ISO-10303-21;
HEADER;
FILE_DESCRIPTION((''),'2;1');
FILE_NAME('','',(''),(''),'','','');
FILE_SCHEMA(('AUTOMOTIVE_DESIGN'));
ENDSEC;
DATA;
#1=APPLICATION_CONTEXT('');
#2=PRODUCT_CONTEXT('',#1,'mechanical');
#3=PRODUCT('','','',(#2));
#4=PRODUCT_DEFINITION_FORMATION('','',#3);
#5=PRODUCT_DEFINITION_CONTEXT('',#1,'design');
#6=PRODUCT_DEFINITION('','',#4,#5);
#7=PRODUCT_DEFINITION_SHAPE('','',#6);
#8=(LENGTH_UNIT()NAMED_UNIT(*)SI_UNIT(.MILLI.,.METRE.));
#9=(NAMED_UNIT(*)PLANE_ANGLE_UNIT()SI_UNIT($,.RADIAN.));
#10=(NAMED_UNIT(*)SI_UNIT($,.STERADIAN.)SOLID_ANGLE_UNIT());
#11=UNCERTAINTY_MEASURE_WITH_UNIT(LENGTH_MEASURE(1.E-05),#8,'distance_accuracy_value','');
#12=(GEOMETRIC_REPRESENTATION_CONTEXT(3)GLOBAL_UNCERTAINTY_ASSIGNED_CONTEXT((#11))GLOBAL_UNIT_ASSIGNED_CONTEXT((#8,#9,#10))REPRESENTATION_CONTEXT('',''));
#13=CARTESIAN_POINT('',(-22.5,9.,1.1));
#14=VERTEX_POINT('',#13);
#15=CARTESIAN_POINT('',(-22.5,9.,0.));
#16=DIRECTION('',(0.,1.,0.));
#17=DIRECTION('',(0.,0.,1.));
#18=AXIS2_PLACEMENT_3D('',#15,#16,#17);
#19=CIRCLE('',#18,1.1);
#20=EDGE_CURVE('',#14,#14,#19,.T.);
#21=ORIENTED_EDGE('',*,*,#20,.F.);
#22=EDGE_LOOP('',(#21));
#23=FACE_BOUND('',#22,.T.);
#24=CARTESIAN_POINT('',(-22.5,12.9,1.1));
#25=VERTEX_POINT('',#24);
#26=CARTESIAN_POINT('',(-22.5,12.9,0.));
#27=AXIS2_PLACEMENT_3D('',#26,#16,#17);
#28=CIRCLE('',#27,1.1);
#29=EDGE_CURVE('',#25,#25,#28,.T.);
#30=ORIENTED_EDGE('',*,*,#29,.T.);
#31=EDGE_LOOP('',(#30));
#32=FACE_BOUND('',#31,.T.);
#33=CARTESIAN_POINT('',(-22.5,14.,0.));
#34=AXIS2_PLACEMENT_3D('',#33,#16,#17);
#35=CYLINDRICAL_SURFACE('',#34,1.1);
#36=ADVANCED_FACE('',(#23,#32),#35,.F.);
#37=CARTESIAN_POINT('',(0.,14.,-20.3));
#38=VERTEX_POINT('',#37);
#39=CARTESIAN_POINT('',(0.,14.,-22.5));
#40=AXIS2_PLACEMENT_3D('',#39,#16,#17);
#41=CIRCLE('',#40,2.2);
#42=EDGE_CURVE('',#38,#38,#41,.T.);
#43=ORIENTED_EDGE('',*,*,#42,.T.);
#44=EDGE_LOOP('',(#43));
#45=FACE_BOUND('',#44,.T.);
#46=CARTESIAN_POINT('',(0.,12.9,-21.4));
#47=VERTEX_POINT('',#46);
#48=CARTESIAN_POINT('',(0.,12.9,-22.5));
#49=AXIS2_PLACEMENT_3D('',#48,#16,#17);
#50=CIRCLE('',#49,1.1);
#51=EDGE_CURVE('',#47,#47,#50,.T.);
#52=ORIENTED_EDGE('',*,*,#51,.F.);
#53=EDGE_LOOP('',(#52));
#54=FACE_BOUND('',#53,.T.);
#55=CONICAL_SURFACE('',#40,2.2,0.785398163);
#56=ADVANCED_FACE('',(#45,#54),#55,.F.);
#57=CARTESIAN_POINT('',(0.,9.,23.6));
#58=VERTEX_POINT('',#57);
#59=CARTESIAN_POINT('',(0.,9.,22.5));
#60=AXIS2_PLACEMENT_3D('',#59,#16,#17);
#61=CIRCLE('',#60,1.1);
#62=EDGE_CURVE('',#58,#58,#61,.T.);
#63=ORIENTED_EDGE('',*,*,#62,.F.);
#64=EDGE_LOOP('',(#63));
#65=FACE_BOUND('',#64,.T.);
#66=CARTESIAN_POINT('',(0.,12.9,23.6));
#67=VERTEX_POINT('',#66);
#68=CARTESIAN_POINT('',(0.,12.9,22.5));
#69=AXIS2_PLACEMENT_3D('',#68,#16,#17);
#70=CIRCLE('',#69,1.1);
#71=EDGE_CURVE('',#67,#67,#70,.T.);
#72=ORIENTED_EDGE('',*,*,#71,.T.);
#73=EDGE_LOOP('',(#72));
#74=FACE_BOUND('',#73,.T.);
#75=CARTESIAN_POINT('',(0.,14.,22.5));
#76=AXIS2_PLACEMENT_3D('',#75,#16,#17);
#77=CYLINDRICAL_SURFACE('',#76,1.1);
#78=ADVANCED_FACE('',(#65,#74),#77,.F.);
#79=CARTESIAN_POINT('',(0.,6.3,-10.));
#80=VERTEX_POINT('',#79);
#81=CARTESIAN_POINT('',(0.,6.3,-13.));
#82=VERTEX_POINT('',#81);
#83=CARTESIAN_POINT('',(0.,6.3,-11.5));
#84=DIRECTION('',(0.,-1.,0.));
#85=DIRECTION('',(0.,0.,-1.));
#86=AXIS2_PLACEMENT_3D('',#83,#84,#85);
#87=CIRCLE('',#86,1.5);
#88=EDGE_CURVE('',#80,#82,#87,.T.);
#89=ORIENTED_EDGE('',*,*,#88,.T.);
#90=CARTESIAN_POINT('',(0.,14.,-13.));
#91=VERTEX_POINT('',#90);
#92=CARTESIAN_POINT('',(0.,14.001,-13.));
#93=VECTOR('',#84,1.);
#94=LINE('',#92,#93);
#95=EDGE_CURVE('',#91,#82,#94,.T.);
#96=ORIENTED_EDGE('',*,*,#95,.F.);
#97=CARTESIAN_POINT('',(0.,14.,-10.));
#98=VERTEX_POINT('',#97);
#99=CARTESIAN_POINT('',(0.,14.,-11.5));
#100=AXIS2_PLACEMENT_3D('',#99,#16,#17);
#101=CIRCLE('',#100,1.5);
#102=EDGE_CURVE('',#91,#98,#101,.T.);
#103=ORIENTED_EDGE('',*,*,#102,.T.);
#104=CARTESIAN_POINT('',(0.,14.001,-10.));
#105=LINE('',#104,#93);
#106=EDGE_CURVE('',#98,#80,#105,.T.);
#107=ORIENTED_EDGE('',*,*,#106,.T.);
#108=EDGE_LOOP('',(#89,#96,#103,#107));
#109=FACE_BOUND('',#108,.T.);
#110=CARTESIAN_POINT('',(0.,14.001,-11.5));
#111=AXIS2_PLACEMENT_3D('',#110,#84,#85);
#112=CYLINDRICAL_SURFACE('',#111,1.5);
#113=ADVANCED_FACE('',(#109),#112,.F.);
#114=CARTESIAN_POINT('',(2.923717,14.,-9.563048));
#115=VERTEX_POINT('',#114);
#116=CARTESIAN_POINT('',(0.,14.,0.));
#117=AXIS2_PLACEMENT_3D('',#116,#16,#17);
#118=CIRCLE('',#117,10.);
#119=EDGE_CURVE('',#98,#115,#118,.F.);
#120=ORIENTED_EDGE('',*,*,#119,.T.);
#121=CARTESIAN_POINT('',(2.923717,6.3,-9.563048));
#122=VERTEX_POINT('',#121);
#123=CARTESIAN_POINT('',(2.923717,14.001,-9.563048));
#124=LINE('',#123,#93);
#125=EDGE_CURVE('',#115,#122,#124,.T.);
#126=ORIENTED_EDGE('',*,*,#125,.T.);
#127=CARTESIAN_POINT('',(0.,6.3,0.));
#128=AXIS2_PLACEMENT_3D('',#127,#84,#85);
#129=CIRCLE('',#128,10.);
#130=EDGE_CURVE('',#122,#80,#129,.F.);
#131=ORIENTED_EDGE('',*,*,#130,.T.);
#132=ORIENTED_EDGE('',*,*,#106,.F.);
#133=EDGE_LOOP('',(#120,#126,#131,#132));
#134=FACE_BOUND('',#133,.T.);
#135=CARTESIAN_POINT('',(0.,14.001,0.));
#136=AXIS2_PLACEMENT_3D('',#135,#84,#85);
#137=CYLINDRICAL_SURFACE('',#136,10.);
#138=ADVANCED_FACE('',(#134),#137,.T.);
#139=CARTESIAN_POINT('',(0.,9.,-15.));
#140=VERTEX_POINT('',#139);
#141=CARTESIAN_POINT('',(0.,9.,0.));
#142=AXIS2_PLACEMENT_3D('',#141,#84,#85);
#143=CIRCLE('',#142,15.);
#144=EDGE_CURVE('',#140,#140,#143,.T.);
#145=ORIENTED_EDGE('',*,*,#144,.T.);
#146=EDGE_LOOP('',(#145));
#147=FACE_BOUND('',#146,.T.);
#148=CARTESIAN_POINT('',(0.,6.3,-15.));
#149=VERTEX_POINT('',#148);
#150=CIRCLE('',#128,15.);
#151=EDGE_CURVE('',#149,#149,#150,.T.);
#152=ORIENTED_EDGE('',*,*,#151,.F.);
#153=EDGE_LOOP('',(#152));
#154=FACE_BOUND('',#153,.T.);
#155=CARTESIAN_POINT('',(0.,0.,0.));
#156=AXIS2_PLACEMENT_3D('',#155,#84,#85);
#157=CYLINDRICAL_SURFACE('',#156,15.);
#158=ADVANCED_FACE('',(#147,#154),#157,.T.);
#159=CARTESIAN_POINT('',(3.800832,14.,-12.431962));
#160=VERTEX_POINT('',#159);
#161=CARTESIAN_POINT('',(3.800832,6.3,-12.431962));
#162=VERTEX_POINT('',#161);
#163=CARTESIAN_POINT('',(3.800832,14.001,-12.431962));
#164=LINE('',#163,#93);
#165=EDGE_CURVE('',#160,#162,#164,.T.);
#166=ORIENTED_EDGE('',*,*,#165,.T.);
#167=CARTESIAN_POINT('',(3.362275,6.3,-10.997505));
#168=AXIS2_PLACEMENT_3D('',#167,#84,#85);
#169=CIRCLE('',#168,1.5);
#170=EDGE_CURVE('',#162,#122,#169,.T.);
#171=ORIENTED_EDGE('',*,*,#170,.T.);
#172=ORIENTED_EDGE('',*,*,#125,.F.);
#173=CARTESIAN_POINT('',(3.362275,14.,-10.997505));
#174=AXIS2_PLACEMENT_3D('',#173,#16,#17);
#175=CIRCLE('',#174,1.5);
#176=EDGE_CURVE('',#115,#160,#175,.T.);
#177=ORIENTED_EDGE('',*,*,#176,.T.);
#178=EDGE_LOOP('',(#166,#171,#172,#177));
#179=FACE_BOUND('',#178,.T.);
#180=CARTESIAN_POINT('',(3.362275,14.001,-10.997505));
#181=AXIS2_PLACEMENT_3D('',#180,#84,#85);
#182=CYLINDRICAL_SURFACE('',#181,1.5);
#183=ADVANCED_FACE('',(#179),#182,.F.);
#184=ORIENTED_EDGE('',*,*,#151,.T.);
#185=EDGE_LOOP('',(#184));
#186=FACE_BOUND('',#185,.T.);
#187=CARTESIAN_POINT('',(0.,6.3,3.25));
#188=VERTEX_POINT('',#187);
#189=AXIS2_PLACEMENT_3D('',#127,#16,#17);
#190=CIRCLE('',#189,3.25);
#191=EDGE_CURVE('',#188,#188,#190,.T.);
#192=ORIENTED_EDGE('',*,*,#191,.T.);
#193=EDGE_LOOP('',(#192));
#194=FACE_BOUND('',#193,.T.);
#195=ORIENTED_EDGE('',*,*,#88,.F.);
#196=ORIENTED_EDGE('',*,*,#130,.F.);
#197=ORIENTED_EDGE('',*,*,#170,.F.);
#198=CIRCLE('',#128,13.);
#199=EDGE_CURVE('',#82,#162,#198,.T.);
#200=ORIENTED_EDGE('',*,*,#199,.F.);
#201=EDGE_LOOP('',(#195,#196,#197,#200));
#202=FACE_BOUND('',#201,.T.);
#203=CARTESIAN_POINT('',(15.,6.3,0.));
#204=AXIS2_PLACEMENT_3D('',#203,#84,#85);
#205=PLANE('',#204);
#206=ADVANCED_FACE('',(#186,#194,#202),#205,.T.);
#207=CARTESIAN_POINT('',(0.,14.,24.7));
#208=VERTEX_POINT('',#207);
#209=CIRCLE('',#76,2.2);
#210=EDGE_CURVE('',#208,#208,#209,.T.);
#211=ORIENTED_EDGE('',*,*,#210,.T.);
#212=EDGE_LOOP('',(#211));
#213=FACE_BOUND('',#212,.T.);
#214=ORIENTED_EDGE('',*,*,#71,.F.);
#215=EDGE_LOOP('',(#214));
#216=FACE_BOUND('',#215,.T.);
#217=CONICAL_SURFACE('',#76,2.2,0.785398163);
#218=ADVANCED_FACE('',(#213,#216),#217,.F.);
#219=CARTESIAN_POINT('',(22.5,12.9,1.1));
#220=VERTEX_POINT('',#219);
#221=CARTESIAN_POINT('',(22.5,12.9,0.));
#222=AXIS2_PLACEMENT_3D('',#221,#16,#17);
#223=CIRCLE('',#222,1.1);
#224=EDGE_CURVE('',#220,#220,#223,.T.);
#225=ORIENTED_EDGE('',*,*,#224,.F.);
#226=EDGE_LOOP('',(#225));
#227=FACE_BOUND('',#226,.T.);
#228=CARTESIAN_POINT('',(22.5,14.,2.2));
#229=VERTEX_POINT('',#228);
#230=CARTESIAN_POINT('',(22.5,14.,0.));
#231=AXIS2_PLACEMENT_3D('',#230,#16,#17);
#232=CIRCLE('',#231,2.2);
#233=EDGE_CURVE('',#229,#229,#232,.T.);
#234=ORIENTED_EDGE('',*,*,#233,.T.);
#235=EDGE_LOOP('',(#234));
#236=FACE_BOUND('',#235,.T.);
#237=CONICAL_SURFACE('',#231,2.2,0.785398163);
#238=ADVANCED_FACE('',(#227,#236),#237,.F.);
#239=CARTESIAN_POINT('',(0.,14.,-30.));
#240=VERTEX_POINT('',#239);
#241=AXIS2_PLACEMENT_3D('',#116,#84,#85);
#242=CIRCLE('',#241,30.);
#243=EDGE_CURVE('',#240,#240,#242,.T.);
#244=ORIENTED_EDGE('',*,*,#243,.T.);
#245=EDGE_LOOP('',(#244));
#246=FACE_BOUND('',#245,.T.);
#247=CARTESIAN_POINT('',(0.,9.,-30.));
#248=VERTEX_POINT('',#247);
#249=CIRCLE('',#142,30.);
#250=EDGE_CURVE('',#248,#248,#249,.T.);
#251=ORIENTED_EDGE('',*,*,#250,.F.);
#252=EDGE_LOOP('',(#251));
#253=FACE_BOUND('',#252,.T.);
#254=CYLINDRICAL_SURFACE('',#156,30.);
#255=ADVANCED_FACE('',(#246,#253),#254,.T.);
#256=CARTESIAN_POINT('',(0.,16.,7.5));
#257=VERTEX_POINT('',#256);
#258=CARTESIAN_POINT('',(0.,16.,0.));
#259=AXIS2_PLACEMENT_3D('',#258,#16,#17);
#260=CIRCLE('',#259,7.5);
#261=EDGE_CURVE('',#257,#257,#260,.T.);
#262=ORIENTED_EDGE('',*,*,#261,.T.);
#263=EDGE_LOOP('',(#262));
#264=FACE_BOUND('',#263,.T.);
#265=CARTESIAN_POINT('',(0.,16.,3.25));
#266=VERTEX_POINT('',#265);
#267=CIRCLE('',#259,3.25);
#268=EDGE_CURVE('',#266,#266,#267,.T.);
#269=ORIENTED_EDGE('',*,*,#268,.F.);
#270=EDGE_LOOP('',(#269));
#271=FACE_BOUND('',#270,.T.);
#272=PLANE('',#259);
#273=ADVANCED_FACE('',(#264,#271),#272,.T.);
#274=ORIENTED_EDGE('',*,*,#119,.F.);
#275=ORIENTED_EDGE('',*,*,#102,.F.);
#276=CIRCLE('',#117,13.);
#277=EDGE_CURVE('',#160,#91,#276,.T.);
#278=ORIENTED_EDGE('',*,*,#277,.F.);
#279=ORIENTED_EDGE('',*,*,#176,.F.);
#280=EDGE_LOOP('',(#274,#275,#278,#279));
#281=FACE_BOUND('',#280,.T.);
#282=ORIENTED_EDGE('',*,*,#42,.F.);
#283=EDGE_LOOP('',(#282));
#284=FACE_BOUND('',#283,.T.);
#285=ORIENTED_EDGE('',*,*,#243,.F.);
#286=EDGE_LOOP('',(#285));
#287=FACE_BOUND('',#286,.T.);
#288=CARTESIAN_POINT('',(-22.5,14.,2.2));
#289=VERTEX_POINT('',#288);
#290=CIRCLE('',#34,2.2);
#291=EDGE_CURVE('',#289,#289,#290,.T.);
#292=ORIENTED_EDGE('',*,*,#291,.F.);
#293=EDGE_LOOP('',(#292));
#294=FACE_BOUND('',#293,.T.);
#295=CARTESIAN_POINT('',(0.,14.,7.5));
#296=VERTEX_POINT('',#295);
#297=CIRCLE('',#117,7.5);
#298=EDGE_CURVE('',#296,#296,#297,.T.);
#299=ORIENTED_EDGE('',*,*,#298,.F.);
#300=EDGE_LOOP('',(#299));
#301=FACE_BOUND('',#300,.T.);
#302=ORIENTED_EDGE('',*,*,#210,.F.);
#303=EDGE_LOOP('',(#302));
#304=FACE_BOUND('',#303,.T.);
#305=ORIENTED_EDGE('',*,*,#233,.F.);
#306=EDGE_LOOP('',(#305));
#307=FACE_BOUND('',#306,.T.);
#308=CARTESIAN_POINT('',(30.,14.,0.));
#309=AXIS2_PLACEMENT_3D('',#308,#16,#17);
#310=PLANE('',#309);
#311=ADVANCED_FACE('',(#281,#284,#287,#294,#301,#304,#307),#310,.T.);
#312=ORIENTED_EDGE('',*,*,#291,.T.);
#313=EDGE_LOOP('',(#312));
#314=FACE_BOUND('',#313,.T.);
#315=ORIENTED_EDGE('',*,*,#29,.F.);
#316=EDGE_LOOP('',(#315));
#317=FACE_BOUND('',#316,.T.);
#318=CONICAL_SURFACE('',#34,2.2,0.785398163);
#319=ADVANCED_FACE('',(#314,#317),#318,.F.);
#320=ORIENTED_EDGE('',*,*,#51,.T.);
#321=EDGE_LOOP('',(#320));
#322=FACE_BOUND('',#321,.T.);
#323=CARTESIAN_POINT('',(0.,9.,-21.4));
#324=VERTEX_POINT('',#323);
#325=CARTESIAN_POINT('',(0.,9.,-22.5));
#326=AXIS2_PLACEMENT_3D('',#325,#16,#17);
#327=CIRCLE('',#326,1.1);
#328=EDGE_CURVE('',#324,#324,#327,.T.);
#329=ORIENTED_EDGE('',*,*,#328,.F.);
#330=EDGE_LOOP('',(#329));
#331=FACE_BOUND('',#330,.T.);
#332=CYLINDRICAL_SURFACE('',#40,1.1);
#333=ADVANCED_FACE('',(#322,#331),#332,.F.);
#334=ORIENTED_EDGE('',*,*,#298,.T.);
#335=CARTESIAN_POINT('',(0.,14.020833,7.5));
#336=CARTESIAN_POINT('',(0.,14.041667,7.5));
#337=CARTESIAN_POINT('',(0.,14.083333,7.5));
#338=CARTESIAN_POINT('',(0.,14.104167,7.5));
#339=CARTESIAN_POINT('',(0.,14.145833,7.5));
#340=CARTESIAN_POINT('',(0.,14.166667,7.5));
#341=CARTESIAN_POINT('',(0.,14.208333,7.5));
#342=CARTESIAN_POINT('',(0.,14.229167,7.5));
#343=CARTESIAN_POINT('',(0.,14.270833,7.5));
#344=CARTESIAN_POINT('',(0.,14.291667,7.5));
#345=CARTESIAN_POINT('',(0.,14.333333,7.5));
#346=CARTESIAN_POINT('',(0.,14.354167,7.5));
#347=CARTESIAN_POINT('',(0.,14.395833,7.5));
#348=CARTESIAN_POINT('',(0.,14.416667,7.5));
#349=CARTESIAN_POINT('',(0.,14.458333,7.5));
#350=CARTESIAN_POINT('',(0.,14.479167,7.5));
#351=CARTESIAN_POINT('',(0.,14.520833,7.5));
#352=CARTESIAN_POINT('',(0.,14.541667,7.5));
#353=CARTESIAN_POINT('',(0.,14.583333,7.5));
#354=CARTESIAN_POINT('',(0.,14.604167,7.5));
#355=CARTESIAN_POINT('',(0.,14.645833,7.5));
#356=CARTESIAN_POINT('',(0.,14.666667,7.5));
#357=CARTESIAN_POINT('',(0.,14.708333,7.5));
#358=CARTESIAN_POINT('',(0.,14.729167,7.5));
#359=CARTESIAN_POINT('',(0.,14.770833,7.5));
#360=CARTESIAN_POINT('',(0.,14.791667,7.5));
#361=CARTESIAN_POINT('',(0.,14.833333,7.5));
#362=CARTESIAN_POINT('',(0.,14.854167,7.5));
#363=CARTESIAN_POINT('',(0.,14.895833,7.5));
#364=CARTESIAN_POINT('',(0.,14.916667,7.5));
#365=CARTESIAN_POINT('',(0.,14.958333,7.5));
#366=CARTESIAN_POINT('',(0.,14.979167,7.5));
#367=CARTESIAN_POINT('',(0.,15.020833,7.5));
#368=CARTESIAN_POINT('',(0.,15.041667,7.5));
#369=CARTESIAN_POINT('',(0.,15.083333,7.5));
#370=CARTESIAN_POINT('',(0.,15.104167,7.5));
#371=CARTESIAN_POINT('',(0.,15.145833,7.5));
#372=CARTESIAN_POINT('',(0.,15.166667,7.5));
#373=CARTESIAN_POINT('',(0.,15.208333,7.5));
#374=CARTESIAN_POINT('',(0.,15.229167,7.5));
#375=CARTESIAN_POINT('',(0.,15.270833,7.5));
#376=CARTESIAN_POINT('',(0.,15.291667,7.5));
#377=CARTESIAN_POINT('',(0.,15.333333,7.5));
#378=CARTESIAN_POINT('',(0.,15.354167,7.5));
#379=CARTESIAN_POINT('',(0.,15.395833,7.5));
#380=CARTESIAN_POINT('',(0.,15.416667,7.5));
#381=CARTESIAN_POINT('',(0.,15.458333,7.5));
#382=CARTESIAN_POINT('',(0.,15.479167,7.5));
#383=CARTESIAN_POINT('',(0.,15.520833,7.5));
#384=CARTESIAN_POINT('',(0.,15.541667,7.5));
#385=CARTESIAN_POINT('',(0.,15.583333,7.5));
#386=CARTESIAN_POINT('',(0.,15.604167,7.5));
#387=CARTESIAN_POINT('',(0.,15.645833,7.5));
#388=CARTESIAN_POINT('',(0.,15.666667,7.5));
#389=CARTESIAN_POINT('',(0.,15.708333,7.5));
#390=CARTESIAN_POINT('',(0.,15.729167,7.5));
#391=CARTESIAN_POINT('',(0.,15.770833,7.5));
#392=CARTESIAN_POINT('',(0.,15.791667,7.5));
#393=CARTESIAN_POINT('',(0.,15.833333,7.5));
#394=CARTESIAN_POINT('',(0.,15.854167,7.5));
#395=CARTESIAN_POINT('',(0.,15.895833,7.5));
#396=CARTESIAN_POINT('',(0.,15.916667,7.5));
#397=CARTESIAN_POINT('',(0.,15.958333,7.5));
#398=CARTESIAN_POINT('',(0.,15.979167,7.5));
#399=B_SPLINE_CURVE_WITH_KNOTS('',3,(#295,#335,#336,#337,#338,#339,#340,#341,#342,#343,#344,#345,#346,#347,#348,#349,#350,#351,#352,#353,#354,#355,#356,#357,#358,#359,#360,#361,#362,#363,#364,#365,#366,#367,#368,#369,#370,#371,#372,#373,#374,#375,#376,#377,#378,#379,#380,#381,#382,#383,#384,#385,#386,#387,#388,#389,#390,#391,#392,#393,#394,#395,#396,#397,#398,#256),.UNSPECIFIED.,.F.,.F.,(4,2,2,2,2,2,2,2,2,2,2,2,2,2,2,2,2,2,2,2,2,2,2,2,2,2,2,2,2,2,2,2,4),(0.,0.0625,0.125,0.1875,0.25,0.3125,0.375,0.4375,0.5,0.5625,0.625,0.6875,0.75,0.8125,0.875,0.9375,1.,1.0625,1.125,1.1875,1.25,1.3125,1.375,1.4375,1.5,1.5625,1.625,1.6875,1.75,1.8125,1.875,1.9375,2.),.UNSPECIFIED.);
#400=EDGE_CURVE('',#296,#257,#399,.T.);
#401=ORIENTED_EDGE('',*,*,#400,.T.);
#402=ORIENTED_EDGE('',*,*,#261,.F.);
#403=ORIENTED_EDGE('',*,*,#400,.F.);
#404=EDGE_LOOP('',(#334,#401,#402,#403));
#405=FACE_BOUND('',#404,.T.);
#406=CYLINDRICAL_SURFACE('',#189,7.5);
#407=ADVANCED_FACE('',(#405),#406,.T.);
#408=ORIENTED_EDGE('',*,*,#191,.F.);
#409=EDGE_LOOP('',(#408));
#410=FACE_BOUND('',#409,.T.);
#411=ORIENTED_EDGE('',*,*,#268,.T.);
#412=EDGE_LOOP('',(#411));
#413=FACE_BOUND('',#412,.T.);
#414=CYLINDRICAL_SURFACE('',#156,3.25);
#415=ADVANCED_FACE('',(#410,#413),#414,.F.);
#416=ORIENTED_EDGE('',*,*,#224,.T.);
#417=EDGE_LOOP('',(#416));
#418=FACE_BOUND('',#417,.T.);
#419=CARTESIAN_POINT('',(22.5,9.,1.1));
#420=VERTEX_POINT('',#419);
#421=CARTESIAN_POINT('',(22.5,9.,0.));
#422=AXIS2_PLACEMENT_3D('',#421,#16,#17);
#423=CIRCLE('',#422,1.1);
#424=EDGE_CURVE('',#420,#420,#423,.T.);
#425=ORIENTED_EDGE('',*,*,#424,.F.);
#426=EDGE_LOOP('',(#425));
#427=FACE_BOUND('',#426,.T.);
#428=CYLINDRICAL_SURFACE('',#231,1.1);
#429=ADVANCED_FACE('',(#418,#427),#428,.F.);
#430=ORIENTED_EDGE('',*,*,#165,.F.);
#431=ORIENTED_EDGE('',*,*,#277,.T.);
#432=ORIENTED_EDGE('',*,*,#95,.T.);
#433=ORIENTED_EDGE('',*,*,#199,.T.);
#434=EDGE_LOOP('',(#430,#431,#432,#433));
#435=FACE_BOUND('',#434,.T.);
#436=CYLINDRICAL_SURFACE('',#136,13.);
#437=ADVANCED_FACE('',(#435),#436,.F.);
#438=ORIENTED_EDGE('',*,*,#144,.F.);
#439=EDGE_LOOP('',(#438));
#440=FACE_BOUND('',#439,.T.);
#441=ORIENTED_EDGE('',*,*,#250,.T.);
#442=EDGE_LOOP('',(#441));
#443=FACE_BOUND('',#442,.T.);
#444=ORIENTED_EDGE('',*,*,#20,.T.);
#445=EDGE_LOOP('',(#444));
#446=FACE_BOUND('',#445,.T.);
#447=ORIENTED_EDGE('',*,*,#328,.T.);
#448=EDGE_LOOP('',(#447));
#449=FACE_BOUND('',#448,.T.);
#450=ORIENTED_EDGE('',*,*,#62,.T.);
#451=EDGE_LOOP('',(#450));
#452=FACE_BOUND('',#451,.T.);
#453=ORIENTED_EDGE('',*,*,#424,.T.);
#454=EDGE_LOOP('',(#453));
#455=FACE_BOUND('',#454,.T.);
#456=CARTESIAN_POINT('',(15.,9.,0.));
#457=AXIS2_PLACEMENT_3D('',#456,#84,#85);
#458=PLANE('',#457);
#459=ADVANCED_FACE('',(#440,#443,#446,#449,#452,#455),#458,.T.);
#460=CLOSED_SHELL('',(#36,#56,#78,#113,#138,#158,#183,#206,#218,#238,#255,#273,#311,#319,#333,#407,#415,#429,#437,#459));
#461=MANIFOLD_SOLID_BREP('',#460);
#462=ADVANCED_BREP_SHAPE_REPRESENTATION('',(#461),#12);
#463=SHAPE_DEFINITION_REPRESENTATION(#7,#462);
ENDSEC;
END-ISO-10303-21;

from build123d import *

# Parameters (mm, degrees)
CORTE_EXTRUS_O3_REACH         = 46.677
RESSALTO_EXTRUS_O1_DEPTH      = 2
RESSALTO_EXTRUS_O1_DEPTH_BACK = 7.7
ESBO_O4_R                     = 7.5
ESBO_O4_R_2                   = 3.25


# Read off the part's stored shape, not the designer's step: PadrãoCircular1
with BuildPart() as part:
    # Esboço1 → Revolução1 (revolve)
    with BuildSketch(Plane.XY, mode=Mode.PRIVATE) as revolu_o1_sk:
        Polygon((3.25, 14), (3.25, 11.5), (5, 11.5), (5, 6.3), (15, 6.3), (15, 9), (30, 9), (30, 14), align=None)
    revolve(revolu_o1_sk.sketch.rotate(Axis((0, 0, 0), (0, 1, 0)), 90), axis=Axis((0, 0, 0), (0, 1, 0)))

    # Esboço2 → Corte-extrusão3 (cut, up to next)
    with BuildSketch(Plane(origin=(0, 0, 0), x_dir=(1, 0, 0), z_dir=(0, 1, 0)), mode=Mode.PRIVATE) as corte_extrus_o3_sk1:
        with BuildLine():
            ThreePointArc((2.923717047, 9.56304756), (1.478094111, 9.890158634), (0, 10))
            ThreePointArc((0, 10), (-1.5, 11.5), (0, 13))
            ThreePointArc((0, 13), (1.921522345, 12.857206224), (3.800832161, 12.431961828))
            ThreePointArc((3.800832161, 12.431961828), (4.796731738, 10.558947136), (2.923717047, 9.56304756))
        make_face()
    corte_extrus_o3_tool1 = extrude(corte_extrus_o3_sk1.sketch, amount=CORTE_EXTRUS_O3_REACH, mode=Mode.PRIVATE) & part.part
    add(corte_extrus_o3_tool1.solids().sort_by_distance((1.688498, 0, -11.298001))[0], mode=Mode.SUBTRACT)

    # Esboço4 → Ressalto-extrusão1 (add, two sides: drawn at the far end of the back side and taken through both)
    with BuildSketch(Plane(origin=(0, 14, 0), x_dir=(1, 0, 0), z_dir=(0, 1, 0)).offset(-RESSALTO_EXTRUS_O1_DEPTH_BACK)):
        with Locations(Location((0, 0, 0), (0, 0, 270))):
            Circle(ESBO_O4_R)
        with Locations(Location((0, 0, 0), (0, 0, 270))):
            Circle(ESBO_O4_R_2, mode=Mode.SUBTRACT)
    extrude(amount=RESSALTO_EXTRUS_O1_DEPTH + RESSALTO_EXTRUS_O1_DEPTH_BACK)

    # Esboço10 → Escareado para parafuso de máquina com cabeça chata de M21 (revolve, cut)
    with BuildSketch(Plane(origin=(0, 14, -22.5), x_dir=(0, 0, 1), z_dir=(1, 0, 0))):
        Polygon((0, 0), (0, 5.660946681), (1.1, 5), (1.1, 1.1), (2.2, 0), align=None)
    revolve(axis=Axis((0, 20.35, -22.5), (0, -1, 0)), mode=Mode.SUBTRACT)

    # PadrãoCircular1 outline → PadrãoCircular1 (revolve, cut)
    with BuildSketch(Plane(origin=(22.5, 0, 0), x_dir=(1, 0, 0), z_dir=(0, 0, 1))):
        Polygon((0, 9), (1.1, 9), (1.1, 12.9), (2.2, 14), (0, 14), align=None)
    revolve(axis=Axis((22.5, 0, 0), (0, 1, 0)), mode=Mode.SUBTRACT)

    # Padr_oCircular1 2 outline → Padr_oCircular1 2 (revolve, cut)
    with BuildSketch(Plane.XY.offset(22.5)):
        Polygon((0, 9), (1.1, 9), (1.1, 12.9), (2.2, 14), (0, 14), align=None)
    revolve(axis=Axis((0, 0, 22.5), (0, 1, 0)), mode=Mode.SUBTRACT)

    # Padr_oCircular1 3 outline → Padr_oCircular1 3 (revolve, cut)
    with BuildSketch(Plane(origin=(-22.5, 0, 0), x_dir=(1, 0, 0), z_dir=(0, 0, 1))):
        Polygon((0, 9), (1.1, 9), (1.1, 12.9), (2.2, 14), (0, 14), align=None)
    revolve(axis=Axis((-22.5, 0, 0), (0, 1, 0)), mode=Mode.SUBTRACT)


solid = part.part
